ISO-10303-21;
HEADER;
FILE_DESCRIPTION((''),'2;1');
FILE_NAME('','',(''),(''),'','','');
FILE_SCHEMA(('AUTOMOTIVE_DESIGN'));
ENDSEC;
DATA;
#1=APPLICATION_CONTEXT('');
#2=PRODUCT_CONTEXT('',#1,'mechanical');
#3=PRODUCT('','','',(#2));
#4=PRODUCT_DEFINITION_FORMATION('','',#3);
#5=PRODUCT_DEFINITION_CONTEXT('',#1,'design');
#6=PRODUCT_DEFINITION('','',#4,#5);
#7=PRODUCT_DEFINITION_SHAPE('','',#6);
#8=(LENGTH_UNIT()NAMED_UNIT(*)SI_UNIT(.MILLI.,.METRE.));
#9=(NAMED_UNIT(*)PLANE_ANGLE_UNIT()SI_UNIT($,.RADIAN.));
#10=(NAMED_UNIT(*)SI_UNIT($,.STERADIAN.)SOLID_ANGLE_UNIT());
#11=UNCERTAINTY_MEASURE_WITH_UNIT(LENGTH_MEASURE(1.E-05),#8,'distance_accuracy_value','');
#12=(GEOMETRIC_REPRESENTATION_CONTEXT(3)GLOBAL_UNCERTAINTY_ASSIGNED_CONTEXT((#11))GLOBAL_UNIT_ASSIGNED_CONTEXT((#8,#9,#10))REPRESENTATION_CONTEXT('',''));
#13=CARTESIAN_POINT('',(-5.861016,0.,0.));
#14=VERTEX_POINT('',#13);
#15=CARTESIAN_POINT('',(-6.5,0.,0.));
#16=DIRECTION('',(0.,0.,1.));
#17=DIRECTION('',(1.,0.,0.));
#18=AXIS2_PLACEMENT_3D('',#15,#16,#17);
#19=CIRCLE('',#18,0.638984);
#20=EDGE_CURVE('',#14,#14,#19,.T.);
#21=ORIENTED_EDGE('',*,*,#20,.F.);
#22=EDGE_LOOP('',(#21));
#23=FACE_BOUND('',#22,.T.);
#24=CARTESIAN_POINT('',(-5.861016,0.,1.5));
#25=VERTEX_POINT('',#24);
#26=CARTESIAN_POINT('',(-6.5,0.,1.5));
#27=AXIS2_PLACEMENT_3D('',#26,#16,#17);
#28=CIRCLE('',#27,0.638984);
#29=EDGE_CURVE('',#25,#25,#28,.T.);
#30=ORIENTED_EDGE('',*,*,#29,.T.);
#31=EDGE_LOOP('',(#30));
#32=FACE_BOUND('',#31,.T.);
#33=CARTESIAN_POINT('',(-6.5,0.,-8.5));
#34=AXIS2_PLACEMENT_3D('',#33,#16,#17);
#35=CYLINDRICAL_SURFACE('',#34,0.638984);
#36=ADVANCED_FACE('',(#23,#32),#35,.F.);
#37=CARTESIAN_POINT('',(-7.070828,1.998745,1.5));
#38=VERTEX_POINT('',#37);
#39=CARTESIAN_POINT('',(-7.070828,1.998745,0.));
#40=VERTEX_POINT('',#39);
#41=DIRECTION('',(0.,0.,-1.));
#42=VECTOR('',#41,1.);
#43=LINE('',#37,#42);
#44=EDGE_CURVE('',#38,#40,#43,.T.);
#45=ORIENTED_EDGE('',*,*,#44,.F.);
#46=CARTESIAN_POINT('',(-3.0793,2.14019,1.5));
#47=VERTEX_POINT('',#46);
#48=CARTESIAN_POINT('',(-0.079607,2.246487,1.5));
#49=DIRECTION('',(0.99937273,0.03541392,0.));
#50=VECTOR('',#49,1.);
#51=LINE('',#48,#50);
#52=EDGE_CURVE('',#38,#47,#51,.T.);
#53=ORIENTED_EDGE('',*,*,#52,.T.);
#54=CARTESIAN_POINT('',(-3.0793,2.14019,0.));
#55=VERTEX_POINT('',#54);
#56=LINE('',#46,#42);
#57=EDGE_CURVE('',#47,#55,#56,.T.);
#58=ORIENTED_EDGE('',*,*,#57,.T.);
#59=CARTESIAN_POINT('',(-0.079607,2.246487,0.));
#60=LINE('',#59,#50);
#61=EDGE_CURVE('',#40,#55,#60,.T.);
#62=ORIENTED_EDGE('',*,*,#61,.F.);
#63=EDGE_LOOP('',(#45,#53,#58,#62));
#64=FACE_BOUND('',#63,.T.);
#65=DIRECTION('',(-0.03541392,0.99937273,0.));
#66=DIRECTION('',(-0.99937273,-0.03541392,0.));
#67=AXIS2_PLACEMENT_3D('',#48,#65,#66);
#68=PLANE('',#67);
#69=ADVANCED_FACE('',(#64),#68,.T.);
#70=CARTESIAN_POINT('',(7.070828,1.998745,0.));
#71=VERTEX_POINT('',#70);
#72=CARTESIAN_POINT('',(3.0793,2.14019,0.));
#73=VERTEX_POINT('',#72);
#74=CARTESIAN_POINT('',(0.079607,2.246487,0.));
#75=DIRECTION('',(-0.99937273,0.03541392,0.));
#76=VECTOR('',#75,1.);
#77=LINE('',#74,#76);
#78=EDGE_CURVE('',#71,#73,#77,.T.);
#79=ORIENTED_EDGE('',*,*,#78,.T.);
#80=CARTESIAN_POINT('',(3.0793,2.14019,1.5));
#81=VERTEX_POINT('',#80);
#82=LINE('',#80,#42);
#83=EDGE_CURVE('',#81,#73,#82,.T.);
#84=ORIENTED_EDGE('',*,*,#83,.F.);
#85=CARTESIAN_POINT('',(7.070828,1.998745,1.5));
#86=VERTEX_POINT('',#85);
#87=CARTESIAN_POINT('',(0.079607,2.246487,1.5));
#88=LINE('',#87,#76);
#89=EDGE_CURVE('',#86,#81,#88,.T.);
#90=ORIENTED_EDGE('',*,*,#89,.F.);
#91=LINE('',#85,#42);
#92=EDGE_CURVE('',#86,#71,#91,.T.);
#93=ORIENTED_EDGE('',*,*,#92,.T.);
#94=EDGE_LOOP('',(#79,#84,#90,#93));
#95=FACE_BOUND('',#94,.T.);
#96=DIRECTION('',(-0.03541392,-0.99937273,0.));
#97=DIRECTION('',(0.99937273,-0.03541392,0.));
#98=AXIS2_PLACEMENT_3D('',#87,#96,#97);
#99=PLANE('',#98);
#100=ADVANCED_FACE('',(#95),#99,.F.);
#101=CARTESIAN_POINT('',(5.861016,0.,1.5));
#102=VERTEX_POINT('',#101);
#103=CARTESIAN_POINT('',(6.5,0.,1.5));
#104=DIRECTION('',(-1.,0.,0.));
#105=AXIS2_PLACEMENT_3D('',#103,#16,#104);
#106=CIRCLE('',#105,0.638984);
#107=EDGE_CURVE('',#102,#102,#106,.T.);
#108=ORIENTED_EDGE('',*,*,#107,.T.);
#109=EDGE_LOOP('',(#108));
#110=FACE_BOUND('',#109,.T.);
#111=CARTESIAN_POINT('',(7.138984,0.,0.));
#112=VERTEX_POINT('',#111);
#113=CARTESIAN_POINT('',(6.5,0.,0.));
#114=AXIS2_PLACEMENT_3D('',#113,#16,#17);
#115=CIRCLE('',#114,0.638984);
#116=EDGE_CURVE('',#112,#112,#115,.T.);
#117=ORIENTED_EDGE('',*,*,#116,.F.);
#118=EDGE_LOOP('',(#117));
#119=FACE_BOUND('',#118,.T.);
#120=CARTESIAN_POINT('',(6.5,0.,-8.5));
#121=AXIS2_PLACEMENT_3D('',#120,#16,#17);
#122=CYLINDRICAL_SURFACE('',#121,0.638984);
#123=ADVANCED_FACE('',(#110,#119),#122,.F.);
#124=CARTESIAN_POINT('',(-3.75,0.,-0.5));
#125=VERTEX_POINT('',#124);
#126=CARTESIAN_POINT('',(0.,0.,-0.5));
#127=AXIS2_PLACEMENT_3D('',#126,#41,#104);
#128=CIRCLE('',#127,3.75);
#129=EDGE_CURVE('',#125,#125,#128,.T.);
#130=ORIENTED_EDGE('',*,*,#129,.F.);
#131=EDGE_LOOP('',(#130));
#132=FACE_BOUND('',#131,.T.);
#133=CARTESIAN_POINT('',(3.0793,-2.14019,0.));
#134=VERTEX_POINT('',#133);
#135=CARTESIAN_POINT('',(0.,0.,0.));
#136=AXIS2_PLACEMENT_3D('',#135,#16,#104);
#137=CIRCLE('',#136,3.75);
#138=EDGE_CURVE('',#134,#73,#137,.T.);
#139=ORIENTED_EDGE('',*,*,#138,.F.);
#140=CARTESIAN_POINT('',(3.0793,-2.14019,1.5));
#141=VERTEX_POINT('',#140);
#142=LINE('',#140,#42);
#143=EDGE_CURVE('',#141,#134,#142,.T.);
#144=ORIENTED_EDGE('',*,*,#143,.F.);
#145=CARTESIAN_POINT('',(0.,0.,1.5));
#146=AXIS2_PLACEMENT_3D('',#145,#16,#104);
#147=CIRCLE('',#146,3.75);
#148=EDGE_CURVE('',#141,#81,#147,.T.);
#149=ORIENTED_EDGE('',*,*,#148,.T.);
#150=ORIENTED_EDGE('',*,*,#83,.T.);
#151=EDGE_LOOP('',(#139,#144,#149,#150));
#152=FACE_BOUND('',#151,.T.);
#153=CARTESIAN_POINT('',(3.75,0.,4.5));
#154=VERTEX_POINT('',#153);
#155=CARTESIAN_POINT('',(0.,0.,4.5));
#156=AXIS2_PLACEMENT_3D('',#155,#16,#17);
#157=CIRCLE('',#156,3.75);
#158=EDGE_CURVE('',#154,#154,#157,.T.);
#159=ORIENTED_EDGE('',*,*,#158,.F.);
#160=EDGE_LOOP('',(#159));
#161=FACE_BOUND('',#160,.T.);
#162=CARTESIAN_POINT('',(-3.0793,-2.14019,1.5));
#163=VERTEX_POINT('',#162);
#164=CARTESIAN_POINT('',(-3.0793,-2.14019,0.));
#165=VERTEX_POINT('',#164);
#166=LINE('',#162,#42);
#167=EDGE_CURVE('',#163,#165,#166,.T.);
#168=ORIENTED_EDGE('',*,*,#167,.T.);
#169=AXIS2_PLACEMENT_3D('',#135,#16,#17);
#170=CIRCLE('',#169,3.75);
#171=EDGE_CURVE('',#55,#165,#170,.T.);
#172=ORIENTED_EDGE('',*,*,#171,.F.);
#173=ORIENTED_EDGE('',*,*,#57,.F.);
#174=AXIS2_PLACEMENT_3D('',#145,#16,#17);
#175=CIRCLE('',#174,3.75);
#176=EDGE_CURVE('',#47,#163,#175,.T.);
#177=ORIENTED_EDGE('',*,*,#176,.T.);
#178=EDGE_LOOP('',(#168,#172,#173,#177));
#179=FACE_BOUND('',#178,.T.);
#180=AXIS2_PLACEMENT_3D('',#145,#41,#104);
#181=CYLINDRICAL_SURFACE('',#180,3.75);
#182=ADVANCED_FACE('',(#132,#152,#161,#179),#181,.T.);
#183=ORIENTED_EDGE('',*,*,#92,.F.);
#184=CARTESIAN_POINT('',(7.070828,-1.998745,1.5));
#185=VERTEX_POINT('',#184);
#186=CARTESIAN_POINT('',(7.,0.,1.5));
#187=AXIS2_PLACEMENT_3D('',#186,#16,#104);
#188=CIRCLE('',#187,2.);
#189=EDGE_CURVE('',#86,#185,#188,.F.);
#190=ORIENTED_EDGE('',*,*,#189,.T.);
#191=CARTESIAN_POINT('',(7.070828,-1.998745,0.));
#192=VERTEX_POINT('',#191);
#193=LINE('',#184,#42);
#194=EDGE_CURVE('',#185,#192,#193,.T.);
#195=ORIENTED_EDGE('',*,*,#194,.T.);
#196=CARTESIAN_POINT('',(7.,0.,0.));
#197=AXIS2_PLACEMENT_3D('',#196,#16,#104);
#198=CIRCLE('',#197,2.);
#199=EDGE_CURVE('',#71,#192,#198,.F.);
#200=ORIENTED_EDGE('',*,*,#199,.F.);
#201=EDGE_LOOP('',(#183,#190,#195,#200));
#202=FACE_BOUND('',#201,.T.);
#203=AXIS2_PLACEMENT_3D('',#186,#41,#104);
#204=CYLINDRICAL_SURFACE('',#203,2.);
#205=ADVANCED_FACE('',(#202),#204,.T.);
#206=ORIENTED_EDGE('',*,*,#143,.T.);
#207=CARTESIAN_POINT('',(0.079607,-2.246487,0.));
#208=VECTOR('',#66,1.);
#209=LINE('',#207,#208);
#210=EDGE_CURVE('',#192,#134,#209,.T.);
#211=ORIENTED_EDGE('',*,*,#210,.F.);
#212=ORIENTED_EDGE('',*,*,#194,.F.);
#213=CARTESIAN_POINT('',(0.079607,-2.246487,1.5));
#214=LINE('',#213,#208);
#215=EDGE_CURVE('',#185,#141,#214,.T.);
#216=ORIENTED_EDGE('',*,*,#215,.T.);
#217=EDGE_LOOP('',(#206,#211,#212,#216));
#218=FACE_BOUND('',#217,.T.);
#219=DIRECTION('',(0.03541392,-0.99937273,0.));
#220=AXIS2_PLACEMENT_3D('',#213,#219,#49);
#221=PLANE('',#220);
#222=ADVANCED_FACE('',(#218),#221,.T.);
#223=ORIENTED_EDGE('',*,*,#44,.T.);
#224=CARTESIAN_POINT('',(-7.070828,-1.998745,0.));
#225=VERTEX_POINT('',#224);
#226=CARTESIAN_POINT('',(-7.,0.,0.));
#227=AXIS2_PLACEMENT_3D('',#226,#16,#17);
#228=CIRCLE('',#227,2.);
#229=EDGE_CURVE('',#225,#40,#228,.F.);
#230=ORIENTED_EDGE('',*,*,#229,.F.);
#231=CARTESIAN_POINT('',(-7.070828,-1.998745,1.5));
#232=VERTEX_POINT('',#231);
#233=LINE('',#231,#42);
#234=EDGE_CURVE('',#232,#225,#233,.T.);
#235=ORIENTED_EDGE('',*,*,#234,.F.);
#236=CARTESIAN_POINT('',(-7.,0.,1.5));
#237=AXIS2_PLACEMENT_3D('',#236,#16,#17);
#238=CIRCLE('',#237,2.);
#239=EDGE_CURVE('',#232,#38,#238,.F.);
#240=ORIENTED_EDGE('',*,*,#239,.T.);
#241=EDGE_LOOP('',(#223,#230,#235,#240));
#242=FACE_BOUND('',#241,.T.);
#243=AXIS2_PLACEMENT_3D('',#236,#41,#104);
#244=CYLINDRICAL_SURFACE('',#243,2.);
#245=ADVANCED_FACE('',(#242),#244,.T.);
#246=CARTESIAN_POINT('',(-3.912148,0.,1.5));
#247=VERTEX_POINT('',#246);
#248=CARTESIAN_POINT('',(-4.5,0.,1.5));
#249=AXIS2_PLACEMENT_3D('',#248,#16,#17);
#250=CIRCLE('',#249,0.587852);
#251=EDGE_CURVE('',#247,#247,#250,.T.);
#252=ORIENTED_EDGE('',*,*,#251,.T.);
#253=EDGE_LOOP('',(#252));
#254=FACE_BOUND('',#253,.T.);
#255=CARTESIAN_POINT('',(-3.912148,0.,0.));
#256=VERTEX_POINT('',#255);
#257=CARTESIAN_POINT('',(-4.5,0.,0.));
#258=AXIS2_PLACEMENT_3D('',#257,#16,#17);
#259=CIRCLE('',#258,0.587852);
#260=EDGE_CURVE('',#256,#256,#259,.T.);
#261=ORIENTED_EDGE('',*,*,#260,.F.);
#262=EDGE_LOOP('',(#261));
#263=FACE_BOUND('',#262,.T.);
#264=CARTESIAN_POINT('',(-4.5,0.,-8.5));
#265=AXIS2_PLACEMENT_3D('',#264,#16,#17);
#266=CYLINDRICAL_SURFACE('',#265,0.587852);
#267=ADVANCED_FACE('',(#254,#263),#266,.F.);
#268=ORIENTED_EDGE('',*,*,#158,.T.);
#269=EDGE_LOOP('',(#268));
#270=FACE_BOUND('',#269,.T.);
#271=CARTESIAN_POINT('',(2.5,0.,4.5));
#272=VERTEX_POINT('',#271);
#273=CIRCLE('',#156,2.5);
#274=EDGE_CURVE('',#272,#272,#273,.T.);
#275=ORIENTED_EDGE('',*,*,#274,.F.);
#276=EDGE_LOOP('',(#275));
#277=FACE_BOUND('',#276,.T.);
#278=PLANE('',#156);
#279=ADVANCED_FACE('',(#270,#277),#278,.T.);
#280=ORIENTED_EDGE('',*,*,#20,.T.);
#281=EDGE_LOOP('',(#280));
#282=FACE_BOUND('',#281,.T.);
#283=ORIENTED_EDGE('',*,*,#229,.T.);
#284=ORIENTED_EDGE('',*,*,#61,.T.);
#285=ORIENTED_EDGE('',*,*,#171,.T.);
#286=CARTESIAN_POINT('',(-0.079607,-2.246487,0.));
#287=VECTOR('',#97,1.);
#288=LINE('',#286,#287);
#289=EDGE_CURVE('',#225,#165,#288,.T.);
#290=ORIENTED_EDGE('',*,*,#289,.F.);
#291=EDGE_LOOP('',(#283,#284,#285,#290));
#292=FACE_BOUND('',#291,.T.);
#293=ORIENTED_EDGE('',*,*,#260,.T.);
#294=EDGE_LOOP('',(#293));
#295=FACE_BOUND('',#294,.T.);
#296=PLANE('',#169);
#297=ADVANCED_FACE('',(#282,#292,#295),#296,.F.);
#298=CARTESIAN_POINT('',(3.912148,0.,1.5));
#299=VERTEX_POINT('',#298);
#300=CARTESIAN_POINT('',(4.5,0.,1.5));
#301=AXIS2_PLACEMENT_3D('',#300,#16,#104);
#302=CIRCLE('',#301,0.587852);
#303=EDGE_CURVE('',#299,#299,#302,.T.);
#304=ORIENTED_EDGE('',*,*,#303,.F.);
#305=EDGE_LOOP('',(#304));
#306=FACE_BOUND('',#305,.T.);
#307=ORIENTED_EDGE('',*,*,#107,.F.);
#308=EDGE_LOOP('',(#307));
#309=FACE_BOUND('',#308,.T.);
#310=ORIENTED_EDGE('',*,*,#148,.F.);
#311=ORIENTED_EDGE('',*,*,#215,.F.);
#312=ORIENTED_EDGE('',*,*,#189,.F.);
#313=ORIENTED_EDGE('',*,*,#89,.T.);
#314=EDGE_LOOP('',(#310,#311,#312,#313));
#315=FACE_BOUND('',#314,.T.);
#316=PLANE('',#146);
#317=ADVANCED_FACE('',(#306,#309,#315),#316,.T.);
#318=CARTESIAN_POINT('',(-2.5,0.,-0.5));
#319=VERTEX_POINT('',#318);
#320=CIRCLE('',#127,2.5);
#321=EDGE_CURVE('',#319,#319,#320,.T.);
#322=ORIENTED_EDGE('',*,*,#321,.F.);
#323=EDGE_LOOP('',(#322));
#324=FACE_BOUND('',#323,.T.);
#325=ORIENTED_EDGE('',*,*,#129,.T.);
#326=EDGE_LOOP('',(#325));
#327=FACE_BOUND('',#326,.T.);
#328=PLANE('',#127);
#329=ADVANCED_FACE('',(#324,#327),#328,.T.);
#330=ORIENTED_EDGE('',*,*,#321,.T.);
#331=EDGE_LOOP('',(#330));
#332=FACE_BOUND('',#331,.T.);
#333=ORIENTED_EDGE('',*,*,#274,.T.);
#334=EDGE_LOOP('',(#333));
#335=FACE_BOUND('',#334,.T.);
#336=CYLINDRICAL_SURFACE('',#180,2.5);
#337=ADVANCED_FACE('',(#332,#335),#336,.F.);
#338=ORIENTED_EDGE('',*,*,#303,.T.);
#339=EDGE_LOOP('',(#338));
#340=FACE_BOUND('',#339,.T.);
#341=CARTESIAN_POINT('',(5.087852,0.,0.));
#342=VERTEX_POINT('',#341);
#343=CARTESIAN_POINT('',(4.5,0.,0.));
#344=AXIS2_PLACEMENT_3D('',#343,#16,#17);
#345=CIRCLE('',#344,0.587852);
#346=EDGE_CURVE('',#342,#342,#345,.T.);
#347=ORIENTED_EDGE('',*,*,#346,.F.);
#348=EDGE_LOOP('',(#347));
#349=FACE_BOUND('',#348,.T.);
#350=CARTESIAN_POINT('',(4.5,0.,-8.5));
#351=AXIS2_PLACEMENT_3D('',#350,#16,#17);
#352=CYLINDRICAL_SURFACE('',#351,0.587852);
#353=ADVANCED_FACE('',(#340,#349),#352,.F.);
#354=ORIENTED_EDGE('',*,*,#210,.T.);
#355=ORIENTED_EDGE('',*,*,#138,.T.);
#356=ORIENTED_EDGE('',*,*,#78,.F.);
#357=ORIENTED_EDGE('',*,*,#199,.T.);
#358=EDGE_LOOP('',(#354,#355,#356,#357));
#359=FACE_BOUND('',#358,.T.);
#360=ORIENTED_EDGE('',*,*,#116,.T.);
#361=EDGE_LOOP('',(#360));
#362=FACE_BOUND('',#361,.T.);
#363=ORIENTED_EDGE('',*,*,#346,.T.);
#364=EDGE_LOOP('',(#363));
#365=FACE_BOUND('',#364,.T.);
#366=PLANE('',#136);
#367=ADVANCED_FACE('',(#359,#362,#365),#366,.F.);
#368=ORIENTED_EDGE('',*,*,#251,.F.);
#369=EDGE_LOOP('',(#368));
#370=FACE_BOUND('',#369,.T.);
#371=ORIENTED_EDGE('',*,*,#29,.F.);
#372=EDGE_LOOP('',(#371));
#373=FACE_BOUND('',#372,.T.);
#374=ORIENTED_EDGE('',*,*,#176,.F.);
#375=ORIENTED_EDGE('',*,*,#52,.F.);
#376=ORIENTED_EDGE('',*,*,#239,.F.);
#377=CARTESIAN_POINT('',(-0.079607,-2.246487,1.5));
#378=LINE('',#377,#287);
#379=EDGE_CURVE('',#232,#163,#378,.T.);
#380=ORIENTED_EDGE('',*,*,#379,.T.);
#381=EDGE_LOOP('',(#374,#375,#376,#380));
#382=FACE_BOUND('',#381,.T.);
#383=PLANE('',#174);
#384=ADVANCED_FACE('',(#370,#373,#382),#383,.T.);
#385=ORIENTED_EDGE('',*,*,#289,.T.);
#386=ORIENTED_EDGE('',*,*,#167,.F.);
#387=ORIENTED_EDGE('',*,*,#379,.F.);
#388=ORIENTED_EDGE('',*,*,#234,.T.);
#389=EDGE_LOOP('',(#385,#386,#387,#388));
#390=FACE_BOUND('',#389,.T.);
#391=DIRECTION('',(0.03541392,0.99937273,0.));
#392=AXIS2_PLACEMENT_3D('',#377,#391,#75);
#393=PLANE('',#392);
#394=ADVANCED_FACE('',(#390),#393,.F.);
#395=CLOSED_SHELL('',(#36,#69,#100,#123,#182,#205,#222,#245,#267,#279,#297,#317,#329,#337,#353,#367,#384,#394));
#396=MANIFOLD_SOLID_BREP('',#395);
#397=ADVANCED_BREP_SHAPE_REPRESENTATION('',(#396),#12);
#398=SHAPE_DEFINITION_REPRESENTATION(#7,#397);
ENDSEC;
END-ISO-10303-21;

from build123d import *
from build123d.topology import SkipClean

# Parameters (mm, degrees)
EXTRUDE_3_DEPTH              = 1.5
EXTRUDE_3_2_DEPTH            = 1.5
SKETCH_2_R                   = 3.75
SKETCH_2_R_2                 = 2.5
EXTRUDE_5_DEPTH              = 3
EXTRUDE_START                = 2
SKETCH_3_R                   = 3.75
SKETCH_3_R_2                 = 2.5
EXTRUDE_6_DEPTH              = 2
ESQUISSE1_R                  = 0.587851578
ESQUISSE1_R_2                = 0.638983792
ENL_V_MAT_EXTRU_1_DEPTH      = 10
R_P_TITION_CIRCULAIRE1_COUNT = 2


with BuildPart() as part:
    # Эскиз1 → Бобышка-Вытянуть3 (new body)
    with BuildSketch(Plane.XY):
        with BuildLine():
            ThreePointArc((-3.079299832, -2.140189839), (-3.57839869, -1.121411082), (-3.75, 0))
            ThreePointArc((-3.75, 0), (-3.57839869, 1.121411082), (-3.079299832, 2.140189839))
            Line((-3.079299832, 2.140189839), (-7.07082784, 1.998745461))
            ThreePointArc((-7.07082784, 1.998745461), (-9, 0), (-7.07082784, -1.998745461))
            Line((-7.07082784, -1.998745461), (-3.079299832, -2.140189839))
        make_face()
    extrude_3 = extrude(amount=EXTRUDE_3_DEPTH)



with BuildPart() as body_2:
    # Эскиз1 → Extrude 3 2 (new body)
    with BuildSketch(Plane.XY):
        with BuildLine():
            Line((3.079299832, 2.140189839), (1.172975936, 2.207742615))
            ThreePointArc((1.172975936, 2.207742615), (2.5, 0), (1.172975936, -2.207742615))
            Line((1.172975936, -2.207742615), (3.079299832, -2.140189839))
            ThreePointArc((3.079299832, -2.140189839), (3.75, 0), (3.079299832, 2.140189839))
        make_face()
    extrude_3_2 = extrude(amount=EXTRUDE_3_2_DEPTH)


with BuildPart() as body_3:
    # Эскиз2 → Бобышка-Вытянуть5 (new body)
    with BuildSketch(Plane.XY.offset(1.5)):
        Circle(SKETCH_2_R)
        Circle(SKETCH_2_R_2, mode=Mode.SUBTRACT)
    extrude(amount=EXTRUDE_5_DEPTH)


with BuildPart() as part_1:
    with SkipClean():  # the faces are left unmerged after this step: merging them gives an invalid solid
        add(part.part)

        add(body_2.part)  # Бобышка-Вытянуть6 merges body 2

        add(body_3.part)  # Бобышка-Вытянуть6 merges body 3
        # Эскиз3 → Бобышка-Вытянуть6 (add)
        with BuildSketch(Plane(origin=(0, 0, 1.5), x_dir=(-1, 0, 0), z_dir=(0, 0, -1)).offset(EXTRUDE_START)):
            Circle(SKETCH_3_R)
            Circle(SKETCH_3_R_2, mode=Mode.SUBTRACT)
        extrude(amount=-EXTRUDE_6_DEPTH)

    # Esquisse1 → Enlèv. mat.-Extru.1 (cut)
    with SkipClean():  # the faces are left unmerged after this step: merging them gives an invalid solid
        with BuildSketch(Plane.XY.offset(1.5)):
            with Locations((-4.5, 0)):
                Circle(ESQUISSE1_R)
            with Locations((-6.5, 0)):
                Circle(ESQUISSE1_R_2)
        enl_v_mat_extru_1 = extrude(amount=-ENL_V_MAT_EXTRU_1_DEPTH, mode=Mode.SUBTRACT)

    # Répétition circulaire1: Бобышка-Вытянуть3, Extrude 3 2, Enlèv. mat.-Extru.1 ×2 about axis
    with SkipClean():  # the faces are left unmerged after this step: merging them gives an invalid solid
        r_p_tition_circulaire1_axis = Axis((0, 0, 4.5), (0, 0, 1))
        add([extrude_3.rotate(r_p_tition_circulaire1_axis, i * 360 / R_P_TITION_CIRCULAIRE1_COUNT) for i in range(1, R_P_TITION_CIRCULAIRE1_COUNT)])
        add([extrude_3_2.rotate(r_p_tition_circulaire1_axis, i * 360 / R_P_TITION_CIRCULAIRE1_COUNT) for i in range(1, R_P_TITION_CIRCULAIRE1_COUNT)])
        add([enl_v_mat_extru_1.rotate(r_p_tition_circulaire1_axis, i * 360 / R_P_TITION_CIRCULAIRE1_COUNT) for i in range(1, R_P_TITION_CIRCULAIRE1_COUNT)], mode=Mode.SUBTRACT)
    add(part_1.part.scale(1), mode=Mode.REPLACE)  # the faces are merged on a copy


solid = part_1.part
